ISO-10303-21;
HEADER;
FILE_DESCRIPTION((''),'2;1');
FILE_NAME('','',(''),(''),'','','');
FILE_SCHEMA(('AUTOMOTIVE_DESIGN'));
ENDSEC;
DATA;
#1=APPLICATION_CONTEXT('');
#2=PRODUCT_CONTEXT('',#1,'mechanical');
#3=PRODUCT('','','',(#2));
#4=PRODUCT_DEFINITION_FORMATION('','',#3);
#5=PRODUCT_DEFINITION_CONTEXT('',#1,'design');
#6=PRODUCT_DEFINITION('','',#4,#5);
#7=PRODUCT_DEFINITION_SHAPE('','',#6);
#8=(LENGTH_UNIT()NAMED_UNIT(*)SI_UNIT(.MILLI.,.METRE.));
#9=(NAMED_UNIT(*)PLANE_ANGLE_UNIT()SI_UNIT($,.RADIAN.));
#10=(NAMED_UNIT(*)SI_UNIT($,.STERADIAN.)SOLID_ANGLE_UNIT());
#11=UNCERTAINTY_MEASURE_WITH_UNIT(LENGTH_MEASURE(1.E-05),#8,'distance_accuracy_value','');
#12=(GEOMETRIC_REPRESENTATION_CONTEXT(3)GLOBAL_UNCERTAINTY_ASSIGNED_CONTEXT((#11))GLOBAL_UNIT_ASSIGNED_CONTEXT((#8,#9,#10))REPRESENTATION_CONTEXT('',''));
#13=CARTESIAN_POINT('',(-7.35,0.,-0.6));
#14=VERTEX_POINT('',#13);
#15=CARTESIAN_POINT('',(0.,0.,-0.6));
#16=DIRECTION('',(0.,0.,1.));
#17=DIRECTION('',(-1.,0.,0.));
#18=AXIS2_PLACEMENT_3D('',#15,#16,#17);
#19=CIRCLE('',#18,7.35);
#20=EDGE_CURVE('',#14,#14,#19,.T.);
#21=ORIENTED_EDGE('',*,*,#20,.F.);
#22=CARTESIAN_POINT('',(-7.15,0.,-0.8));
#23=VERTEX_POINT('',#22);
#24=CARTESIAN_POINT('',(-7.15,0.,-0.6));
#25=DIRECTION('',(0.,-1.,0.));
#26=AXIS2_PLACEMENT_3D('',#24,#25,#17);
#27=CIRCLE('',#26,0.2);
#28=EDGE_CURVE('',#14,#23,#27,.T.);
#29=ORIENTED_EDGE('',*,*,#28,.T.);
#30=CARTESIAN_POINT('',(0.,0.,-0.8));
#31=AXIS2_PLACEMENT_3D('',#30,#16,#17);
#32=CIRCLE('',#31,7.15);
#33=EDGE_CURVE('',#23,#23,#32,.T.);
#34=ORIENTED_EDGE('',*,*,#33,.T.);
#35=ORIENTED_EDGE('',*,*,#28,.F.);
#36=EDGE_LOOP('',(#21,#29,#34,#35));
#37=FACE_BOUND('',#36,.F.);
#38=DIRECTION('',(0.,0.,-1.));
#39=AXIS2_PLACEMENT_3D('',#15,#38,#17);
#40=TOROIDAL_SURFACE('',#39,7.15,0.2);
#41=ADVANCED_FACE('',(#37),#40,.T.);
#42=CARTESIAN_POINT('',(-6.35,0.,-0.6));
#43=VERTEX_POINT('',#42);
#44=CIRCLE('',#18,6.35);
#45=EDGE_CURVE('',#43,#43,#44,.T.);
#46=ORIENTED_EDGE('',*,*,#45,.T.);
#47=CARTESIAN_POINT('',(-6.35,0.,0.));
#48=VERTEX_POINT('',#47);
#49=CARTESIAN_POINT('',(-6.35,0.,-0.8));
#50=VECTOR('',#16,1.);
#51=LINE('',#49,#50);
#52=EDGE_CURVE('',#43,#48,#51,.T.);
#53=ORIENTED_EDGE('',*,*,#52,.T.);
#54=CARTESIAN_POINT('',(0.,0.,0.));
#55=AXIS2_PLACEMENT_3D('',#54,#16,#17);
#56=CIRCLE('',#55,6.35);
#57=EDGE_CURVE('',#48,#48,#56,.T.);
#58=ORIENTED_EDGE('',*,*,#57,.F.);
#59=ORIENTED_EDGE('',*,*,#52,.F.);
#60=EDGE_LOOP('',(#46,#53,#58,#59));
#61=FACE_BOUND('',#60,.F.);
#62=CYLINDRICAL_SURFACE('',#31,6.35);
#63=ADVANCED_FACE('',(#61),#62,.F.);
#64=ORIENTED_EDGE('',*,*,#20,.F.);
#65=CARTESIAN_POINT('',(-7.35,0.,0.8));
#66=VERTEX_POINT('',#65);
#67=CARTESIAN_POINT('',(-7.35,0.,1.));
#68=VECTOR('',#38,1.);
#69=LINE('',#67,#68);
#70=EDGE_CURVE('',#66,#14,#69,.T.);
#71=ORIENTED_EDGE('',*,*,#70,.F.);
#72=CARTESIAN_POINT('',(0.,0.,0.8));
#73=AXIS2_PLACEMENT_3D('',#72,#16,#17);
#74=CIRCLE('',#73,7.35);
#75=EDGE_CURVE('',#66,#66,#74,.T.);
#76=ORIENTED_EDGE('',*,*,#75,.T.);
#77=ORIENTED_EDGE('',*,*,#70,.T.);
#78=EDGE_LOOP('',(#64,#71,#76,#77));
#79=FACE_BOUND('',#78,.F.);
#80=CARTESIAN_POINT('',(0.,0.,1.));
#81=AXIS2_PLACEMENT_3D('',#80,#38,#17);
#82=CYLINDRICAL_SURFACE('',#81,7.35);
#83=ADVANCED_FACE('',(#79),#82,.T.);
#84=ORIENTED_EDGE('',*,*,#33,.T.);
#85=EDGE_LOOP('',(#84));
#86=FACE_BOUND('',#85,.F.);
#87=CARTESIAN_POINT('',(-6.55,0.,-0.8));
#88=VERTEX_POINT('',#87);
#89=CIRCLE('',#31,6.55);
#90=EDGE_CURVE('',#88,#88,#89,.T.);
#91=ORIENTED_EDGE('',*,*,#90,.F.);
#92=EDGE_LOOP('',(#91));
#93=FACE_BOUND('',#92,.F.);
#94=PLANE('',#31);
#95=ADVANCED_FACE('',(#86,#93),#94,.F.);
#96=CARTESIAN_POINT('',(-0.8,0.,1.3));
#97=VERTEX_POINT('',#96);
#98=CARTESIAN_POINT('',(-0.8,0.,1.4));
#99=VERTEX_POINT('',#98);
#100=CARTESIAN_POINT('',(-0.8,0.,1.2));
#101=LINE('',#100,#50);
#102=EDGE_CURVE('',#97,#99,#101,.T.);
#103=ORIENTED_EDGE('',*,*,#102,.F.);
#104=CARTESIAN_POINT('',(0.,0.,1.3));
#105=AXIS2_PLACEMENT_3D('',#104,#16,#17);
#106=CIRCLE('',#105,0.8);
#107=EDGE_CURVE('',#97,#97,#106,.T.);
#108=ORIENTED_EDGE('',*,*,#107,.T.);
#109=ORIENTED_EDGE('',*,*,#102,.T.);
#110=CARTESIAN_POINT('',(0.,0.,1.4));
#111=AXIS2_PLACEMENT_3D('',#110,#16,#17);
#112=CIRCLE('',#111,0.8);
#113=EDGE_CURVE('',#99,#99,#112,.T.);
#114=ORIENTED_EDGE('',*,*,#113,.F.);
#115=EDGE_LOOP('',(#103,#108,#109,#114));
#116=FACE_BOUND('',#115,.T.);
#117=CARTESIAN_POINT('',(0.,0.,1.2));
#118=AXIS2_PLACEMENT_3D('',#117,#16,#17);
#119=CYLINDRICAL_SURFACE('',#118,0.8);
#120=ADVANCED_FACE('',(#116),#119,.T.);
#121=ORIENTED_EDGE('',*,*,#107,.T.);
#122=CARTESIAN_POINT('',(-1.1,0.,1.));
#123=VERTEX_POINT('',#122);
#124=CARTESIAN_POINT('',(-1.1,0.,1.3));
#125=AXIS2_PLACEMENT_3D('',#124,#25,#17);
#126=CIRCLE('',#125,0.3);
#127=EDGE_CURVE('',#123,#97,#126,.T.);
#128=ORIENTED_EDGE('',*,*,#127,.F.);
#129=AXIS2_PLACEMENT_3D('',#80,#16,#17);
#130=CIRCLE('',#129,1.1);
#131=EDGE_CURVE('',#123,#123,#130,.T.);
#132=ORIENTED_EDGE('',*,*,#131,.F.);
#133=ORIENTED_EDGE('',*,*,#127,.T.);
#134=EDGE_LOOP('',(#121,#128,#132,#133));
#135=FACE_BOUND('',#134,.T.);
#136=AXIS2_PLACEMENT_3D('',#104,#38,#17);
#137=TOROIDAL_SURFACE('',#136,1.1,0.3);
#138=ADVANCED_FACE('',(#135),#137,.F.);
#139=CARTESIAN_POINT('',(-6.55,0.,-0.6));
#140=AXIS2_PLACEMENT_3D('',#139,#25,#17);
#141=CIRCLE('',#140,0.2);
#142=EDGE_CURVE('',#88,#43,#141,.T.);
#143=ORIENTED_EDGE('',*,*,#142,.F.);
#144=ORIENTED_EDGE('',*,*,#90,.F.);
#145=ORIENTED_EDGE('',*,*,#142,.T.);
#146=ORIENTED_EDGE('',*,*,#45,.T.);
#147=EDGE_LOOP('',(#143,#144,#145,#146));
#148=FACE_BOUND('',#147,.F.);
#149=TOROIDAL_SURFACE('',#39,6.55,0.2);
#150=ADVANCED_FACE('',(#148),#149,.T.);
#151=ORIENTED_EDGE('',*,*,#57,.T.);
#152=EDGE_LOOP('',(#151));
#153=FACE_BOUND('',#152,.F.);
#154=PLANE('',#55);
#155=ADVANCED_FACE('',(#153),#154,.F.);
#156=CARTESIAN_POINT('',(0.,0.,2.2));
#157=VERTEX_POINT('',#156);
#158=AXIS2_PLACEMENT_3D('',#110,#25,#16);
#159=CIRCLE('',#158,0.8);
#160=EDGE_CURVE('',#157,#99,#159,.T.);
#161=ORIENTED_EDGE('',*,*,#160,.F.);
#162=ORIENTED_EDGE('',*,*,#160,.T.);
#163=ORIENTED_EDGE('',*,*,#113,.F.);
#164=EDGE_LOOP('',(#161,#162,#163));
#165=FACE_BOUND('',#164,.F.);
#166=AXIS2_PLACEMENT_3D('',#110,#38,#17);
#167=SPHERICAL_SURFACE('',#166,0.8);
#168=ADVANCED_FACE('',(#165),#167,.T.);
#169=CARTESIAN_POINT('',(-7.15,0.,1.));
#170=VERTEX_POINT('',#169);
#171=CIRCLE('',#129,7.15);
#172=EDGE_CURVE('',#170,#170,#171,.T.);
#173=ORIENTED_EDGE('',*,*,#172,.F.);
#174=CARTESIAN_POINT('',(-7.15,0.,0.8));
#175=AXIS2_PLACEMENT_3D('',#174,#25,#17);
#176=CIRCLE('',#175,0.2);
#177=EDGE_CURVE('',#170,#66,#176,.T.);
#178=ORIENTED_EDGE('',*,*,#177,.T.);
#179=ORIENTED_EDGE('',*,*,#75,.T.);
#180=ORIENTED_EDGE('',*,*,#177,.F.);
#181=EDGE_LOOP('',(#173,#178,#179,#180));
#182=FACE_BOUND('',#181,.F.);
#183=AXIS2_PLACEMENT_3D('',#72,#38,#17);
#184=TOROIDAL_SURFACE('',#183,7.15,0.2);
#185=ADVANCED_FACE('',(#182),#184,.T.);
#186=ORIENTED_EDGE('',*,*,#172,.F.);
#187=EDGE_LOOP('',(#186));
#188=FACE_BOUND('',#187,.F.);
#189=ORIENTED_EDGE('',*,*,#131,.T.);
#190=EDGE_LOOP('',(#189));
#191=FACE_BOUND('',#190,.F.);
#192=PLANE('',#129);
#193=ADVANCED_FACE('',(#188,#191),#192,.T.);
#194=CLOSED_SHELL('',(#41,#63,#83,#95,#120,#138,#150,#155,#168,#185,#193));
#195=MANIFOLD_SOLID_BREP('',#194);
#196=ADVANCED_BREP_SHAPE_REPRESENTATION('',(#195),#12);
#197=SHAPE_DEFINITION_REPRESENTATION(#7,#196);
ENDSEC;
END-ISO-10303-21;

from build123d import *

# Parameters (mm, degrees)
F0_W = 0.8
F0_H = 0.4
F2_R = 0.2
F3_R = 0.3


# Not quite as in the source:
# - a feature names something its author has since deleted; it is built from what else it names


with BuildPart() as f1:
    # F0 (on Front) → F1 (revolve)
    with BuildSketch(Plane.XZ):
        Polygon((-6.35, 0), (0, 0), (0, 1), (-0.8, 1), (-7.35, 1), (-7.35, -0.8), (-6.35, -0.8), align=None)
        with Locations((-0.4, 1.2)):
            Rectangle(F0_W, F0_H)
        with BuildLine():
            Line((-0.8, 1.4), (0, 1.4))
            Line((0, 1.4), (0, 2.2))
            ThreePointArc((0, 2.2), (-0.5656854249, 1.9656854249), (-0.8, 1.4))
        make_face()
    revolve(axis=Axis((0, 0, 0.5), (0, 0, 1)))

    # F2
    f2_edges = [f1.edges().sort_by_distance(p)[0] for p in [
        (7.35, 0, 1),
        (7.35, 0, -0.8),
        (6.35, 0, -0.8),
    ]]
    fillet(f2_edges, radius=F2_R)

    # F3
    f3_edges = [f1.edges().sort_by_distance(p)[0] for p in [
        (0.8, 0, 1),
    ]]
    fillet(f3_edges, radius=F3_R)


solid = f1.part
